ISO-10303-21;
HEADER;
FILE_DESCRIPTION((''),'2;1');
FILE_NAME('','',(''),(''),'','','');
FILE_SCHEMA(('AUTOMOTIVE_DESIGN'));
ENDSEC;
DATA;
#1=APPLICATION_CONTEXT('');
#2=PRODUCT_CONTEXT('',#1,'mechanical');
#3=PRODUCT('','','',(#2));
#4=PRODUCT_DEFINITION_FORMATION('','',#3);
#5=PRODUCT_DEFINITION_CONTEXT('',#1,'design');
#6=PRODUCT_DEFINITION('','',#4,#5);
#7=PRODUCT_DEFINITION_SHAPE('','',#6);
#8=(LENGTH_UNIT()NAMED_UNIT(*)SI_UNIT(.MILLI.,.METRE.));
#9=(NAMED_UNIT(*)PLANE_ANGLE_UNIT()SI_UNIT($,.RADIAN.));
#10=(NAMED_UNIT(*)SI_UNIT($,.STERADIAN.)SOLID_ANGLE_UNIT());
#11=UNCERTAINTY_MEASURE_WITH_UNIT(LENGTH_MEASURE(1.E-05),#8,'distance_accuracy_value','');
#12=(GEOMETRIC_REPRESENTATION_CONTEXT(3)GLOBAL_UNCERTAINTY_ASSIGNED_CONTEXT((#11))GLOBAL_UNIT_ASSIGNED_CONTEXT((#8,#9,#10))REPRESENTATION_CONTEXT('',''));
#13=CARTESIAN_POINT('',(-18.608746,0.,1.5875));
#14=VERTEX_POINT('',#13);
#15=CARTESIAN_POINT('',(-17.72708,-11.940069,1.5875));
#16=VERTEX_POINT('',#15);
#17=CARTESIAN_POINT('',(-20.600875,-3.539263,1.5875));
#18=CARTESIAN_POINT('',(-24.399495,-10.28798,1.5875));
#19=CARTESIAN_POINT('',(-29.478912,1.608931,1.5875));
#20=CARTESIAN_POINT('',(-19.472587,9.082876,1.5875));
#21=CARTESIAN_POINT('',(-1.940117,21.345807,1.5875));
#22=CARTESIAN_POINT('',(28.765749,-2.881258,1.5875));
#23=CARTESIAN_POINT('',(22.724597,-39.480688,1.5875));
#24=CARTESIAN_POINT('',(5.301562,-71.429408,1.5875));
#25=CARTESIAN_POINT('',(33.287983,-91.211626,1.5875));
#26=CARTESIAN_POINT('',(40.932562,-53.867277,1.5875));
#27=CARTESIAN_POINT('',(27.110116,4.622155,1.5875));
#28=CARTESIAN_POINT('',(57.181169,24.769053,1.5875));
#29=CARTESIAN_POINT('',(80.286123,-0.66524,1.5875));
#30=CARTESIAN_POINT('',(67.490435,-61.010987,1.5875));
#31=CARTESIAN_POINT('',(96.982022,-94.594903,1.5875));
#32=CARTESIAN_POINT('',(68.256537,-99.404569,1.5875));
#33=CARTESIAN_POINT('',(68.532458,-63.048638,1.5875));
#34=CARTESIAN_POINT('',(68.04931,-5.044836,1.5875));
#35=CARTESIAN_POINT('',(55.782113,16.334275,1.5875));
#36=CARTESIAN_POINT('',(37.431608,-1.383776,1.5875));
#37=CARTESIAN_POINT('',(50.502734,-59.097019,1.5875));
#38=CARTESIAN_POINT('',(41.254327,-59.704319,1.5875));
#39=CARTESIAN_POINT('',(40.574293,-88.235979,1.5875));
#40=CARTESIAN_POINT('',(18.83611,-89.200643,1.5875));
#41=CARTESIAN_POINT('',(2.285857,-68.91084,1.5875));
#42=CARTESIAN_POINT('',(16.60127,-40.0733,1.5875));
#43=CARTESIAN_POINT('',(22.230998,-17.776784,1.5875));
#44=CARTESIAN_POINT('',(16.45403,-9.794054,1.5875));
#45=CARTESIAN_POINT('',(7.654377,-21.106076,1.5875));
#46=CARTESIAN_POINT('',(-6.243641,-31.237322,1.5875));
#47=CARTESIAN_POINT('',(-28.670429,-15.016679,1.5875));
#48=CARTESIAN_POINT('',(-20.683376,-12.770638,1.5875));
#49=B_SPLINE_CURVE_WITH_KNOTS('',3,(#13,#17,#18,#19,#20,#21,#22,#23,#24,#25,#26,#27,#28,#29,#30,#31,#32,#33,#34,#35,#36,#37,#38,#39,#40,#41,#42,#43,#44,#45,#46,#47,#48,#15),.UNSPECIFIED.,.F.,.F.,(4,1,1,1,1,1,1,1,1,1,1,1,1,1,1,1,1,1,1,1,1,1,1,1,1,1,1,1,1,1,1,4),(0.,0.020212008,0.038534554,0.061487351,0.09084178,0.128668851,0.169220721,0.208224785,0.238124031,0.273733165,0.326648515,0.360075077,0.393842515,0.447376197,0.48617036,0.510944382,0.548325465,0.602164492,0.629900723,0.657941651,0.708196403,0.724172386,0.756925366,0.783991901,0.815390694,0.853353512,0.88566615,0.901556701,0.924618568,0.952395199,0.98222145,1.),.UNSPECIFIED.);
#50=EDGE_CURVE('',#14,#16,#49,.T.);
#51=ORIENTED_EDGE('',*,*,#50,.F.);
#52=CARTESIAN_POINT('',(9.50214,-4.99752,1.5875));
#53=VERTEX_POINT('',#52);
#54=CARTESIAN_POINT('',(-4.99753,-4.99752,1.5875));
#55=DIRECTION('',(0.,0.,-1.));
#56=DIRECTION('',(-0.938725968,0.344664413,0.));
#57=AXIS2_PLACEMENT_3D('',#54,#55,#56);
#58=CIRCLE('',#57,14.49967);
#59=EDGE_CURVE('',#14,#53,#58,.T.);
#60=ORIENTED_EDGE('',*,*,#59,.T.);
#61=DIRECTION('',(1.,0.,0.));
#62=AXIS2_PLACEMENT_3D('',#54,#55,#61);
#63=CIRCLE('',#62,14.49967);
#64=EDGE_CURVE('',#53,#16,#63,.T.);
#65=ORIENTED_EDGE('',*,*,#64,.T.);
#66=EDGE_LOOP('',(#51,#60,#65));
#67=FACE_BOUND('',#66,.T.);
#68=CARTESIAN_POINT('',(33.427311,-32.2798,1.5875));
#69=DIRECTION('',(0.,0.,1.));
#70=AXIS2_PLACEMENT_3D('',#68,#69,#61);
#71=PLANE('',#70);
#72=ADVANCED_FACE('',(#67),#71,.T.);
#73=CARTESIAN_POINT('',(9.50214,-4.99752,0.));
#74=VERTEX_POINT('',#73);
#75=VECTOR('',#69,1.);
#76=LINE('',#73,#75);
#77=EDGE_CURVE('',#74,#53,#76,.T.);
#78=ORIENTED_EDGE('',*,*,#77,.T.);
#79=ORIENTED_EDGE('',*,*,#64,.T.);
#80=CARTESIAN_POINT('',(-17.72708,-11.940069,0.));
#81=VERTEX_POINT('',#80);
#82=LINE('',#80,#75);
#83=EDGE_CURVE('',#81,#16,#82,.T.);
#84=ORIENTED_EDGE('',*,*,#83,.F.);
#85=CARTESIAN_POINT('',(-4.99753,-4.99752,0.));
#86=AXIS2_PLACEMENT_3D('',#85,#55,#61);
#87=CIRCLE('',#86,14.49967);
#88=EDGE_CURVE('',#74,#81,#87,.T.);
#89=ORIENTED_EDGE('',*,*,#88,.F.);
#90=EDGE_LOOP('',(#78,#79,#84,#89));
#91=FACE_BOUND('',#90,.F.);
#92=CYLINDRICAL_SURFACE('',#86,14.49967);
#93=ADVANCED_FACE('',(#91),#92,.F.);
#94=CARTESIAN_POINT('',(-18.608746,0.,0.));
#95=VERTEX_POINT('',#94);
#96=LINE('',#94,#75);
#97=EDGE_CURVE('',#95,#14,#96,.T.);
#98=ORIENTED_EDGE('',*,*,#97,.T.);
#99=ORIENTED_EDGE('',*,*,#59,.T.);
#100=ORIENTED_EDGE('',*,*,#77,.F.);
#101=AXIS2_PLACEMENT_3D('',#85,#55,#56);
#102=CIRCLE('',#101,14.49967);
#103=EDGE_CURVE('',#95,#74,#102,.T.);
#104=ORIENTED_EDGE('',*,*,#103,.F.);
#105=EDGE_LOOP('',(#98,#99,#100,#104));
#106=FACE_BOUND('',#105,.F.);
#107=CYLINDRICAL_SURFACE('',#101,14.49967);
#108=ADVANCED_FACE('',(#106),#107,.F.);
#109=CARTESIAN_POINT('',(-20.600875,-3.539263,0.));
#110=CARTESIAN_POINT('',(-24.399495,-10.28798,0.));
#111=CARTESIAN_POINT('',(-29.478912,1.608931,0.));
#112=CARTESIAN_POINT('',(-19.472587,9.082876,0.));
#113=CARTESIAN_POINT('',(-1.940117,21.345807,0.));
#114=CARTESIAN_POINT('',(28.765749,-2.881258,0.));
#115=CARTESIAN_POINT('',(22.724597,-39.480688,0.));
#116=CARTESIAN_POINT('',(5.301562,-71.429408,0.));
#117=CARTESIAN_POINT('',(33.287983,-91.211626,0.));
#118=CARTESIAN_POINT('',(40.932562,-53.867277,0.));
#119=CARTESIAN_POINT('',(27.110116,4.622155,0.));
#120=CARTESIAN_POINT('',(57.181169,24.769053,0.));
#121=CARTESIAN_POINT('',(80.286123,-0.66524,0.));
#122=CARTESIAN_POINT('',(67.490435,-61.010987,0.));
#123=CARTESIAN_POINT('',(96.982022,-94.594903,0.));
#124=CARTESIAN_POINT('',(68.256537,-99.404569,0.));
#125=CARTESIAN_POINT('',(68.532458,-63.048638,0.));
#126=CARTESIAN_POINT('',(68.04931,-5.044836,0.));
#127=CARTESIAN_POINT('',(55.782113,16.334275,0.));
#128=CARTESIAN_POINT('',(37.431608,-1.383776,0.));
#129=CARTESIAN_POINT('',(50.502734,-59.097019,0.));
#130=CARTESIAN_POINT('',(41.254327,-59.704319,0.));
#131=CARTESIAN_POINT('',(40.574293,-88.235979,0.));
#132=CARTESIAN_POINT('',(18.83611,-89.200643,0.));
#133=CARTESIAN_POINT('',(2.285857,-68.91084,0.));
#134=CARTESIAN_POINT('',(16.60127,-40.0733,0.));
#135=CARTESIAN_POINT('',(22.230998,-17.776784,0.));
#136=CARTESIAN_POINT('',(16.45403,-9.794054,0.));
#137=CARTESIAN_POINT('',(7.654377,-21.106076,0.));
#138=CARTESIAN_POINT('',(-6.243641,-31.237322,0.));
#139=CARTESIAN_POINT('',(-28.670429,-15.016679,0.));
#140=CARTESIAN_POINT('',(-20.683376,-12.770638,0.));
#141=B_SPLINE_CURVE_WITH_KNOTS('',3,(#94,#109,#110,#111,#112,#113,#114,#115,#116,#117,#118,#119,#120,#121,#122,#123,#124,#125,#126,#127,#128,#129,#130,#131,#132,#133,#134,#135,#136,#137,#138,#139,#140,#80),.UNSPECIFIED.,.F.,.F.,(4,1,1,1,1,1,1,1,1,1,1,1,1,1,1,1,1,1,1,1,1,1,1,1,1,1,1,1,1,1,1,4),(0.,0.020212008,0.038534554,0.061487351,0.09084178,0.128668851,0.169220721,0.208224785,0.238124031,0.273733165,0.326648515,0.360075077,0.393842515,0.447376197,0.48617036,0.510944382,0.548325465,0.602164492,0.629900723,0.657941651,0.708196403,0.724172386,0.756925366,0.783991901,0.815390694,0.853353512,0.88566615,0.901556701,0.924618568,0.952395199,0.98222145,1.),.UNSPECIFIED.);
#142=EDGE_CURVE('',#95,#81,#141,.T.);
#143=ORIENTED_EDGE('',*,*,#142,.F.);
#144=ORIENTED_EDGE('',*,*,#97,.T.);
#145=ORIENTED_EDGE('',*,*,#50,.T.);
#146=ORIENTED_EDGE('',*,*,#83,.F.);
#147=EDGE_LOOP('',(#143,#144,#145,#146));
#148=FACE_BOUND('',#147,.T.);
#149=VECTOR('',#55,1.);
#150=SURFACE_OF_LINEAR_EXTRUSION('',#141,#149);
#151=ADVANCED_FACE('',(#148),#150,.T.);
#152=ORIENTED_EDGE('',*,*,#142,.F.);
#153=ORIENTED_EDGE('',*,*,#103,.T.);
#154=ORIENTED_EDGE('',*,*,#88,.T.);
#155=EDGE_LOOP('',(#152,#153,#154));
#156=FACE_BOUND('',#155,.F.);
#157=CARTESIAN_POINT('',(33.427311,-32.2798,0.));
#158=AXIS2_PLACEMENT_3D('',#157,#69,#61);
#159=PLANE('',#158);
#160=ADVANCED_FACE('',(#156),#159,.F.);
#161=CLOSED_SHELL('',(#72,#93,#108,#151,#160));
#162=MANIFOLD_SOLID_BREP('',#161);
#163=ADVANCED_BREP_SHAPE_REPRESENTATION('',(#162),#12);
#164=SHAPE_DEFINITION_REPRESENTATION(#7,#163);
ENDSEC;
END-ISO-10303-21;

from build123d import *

# Parameters (mm, degrees)
F1_DEPTH = 1.5875


# Not quite as in the source:
# - a length typed as a fraction of an inch, garbled in the dataset ("3 / 203.2 mm" for 3/8 in), is restored


with BuildPart() as f1:
    # F0 (on Top) → F1 (new body)
    with BuildSketch(Plane.XY):
        with BuildLine():
            ThreePointArc((-18.608746289, 0), (-2.4595895568, 9.2783086346), (9.5021404255, -4.9975202419))
            ThreePointArc((9.5021404255, -4.9975202419), (-1.4152013236, -19.0476929806), (-17.7270798605, -11.9400686622))
            add(Edge.make_bspline(
                [(-18.608746289, 0), (-20.6008752956, -3.5392629392), (-24.3994951009, -10.2879796398), (-29.4789118417, 1.6089307038), (-19.4725874636, 9.082875952), (-1.9401169295, 21.3458072527), (28.7657489575, -2.8812578451), (22.724596984, -39.4806883927), (5.3015621577, -71.4294075986), (33.2879834228, -91.2116263832), (40.9325621845, -53.8672768485), (27.1101155419, 4.6221548292), (57.181168727, 24.7690532718), (80.2861230411, -0.6652403922), (67.4904349299, -61.0109872062), (96.9820223546, -94.5949025135), (68.256536538, -99.4045691849), (68.5324581278, -63.0486376972), (68.0493101716, -5.0448359229), (55.7821129266, 16.3342746577), (37.4316076141, -1.383775697), (50.5027340937, -59.0970193916), (41.2543268385, -59.7043194343), (40.5742929776, -88.2359790705), (18.8361103554, -89.2006431613), (2.2858573621, -68.9108404505), (16.6012702608, -40.0733003482), (22.2309975217, -17.7767843439), (16.4540295868, -9.7940538912), (7.6543772717, -21.106075767), (-6.2436408032, -31.2373221562), (-28.6704292793, -15.0166785816), (-20.683376113, -12.7706382317), (-17.7270798605, -11.9400686622)],
                knots=[0, 0, 0, 0, 0.0202120082, 0.0385345536, 0.0614873508, 0.0908417798, 0.1286688515, 0.1692207206, 0.2082247853, 0.238124031, 0.273733165, 0.3266485148, 0.3600750772, 0.3938425147, 0.4473761966, 0.4861703598, 0.5109443818, 0.548325465, 0.6021644918, 0.6299007231, 0.6579416514, 0.7081964032, 0.7241723861, 0.7569253665, 0.7839919014, 0.8153906941, 0.8533535119, 0.88566615, 0.901556701, 0.9246185684, 0.9523951989, 0.9822214502, 1, 1, 1, 1], degree=3))
        make_face()
    extrude(amount=F1_DEPTH)


solid = f1.part
